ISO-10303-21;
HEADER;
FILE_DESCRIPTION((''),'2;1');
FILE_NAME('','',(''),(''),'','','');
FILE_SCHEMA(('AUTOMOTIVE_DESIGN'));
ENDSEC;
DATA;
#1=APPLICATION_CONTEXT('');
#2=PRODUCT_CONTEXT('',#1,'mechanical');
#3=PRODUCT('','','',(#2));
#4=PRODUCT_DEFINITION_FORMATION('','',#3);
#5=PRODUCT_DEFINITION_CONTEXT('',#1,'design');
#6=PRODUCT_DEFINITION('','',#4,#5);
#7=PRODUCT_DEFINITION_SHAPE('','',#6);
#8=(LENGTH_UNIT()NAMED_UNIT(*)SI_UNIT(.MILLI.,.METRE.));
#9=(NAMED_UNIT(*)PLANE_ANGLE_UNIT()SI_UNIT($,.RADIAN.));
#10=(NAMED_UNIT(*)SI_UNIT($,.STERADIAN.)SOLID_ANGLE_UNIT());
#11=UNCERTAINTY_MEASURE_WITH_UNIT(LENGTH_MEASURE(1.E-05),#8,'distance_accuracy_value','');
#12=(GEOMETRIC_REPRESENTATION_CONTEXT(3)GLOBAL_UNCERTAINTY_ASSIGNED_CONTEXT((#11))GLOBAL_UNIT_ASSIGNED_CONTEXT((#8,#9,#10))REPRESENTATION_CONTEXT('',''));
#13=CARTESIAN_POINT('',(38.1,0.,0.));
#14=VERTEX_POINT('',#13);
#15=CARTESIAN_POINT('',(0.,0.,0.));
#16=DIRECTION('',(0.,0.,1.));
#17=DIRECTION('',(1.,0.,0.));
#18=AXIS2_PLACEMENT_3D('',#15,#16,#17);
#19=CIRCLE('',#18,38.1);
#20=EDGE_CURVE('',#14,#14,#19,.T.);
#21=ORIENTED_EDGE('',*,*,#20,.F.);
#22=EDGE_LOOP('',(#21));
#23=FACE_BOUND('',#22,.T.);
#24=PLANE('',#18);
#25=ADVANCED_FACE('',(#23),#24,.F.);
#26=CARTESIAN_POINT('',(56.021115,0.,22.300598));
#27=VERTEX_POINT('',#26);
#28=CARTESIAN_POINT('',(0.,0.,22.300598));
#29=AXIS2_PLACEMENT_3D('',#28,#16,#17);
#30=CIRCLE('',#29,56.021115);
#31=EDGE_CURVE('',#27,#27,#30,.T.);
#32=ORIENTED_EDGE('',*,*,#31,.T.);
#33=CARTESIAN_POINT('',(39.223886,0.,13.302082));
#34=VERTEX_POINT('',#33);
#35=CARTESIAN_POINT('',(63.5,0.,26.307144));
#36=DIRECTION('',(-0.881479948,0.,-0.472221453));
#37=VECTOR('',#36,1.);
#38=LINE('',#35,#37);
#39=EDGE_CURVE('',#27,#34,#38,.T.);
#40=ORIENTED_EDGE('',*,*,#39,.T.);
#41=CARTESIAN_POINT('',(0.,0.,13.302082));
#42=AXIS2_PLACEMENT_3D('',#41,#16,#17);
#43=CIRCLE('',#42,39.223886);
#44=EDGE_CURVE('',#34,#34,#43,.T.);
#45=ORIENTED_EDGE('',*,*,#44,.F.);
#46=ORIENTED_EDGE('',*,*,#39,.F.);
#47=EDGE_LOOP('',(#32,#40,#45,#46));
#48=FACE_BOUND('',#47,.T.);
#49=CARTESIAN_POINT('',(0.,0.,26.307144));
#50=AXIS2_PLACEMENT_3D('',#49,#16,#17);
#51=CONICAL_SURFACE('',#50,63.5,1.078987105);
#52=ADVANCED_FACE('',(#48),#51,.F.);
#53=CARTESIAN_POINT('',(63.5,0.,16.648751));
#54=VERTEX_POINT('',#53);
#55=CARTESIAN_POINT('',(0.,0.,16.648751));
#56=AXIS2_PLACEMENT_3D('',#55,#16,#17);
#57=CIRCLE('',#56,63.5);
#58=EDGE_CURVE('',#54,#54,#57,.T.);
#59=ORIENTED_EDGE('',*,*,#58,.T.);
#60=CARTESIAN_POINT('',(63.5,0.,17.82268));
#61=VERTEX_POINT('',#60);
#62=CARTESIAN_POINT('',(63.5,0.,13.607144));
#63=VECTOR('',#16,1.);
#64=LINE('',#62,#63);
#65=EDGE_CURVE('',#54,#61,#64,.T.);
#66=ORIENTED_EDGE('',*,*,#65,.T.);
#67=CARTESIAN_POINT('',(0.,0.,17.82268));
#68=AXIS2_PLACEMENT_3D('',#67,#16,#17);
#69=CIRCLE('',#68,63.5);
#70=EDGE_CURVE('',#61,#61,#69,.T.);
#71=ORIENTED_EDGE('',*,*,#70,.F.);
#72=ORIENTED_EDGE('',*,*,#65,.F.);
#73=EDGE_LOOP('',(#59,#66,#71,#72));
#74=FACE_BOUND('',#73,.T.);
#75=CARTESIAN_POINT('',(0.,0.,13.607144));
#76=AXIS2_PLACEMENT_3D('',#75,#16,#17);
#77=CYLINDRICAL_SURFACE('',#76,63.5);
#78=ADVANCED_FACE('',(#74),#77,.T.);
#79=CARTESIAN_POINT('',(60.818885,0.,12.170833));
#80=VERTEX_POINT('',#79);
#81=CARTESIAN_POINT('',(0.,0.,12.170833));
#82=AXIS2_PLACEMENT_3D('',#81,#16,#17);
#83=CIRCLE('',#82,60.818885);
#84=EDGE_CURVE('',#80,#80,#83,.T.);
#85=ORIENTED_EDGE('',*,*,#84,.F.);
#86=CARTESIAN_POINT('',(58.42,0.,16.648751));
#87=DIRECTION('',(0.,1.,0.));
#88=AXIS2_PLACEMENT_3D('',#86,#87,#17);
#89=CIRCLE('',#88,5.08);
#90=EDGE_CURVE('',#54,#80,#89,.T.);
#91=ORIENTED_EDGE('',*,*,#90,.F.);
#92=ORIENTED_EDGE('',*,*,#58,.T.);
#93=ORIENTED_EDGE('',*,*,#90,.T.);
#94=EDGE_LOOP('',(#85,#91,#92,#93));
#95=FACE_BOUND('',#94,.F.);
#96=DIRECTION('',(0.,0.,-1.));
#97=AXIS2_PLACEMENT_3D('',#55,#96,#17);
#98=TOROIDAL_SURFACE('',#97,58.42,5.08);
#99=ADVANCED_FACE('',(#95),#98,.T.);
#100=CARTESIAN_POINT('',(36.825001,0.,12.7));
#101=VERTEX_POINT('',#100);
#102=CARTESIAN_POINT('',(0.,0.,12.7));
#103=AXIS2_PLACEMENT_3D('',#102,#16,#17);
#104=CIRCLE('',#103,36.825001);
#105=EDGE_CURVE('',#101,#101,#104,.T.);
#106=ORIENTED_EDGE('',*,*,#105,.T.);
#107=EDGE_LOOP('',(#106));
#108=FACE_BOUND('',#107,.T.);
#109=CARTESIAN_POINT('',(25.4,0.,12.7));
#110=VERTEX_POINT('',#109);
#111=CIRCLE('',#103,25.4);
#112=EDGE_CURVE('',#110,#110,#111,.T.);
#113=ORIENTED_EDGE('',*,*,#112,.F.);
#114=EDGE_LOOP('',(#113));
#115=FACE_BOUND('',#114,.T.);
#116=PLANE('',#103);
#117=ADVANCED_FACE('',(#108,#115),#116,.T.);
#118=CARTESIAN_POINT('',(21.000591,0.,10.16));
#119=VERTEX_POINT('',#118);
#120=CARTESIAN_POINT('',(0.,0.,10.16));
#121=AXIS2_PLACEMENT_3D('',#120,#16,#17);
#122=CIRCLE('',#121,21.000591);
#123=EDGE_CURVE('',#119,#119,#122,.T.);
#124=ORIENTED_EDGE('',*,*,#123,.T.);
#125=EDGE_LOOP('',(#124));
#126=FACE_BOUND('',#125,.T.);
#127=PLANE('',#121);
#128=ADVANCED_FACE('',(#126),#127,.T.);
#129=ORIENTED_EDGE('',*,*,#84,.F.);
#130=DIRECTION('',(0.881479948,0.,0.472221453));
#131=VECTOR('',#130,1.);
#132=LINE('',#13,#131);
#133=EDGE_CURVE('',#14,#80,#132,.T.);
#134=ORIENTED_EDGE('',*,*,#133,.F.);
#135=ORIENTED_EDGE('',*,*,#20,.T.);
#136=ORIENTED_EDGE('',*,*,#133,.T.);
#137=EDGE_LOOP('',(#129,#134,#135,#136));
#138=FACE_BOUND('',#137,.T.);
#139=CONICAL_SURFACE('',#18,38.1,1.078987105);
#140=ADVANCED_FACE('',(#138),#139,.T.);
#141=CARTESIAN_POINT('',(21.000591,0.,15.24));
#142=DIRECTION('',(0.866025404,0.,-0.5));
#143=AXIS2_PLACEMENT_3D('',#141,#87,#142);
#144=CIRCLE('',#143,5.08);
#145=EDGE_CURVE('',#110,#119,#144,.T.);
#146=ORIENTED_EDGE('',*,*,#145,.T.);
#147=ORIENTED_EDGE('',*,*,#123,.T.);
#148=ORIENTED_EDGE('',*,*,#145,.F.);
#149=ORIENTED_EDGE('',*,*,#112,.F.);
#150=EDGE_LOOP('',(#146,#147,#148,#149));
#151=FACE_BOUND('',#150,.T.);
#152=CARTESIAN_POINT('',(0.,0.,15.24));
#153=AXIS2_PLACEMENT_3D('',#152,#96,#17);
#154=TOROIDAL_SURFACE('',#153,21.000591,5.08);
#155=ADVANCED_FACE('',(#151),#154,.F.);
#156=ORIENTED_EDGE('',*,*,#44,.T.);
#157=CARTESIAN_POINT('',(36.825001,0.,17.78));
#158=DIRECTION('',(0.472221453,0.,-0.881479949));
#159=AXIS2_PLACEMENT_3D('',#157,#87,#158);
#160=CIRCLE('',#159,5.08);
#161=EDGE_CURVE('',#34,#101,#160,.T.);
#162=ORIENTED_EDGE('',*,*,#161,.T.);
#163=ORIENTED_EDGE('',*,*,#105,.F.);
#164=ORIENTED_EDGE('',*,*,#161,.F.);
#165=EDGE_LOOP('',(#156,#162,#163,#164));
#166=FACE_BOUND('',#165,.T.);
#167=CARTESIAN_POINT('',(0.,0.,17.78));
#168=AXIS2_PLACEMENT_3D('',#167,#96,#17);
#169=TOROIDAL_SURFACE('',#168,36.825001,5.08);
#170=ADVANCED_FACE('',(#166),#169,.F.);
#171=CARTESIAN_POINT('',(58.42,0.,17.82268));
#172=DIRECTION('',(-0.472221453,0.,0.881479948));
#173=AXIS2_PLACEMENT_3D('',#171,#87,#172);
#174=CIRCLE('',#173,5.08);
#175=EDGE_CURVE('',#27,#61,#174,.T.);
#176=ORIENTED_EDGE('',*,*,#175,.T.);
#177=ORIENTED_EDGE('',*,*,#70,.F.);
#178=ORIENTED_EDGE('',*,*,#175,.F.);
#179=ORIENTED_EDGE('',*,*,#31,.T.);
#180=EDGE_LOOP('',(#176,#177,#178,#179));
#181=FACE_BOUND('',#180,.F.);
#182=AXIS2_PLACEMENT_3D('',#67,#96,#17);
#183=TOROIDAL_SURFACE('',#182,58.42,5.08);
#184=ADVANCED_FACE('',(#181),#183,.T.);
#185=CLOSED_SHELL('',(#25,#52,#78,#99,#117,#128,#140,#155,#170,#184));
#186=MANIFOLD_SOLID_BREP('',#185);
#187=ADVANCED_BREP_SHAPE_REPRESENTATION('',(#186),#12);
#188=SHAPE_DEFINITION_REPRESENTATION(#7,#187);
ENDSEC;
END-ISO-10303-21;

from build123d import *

# Parameters (mm, degrees)
F3_R     = 25.4
F4_DEPTH = 2.54


# Not quite as in the source:
# - a fillet or chamfer that OpenCascade refuses, or shapes differently, is made with other operations: its cross-section is extruded or revolved along the edge and cut away or added


with BuildPart() as f2:
    # F0 (on Front) → F2 (revolve)
    with BuildSketch(Plane.XZ):
        Polygon((63.5, 13.6071443505), (63.5, 26.3071443505), (38.1, 12.7), (0, 12.7), (0, 0), (38.1, 0), align=None)
    revolve(axis=Axis((0, 0, 37.3074896634), (0, 0, 1)))

    # F3 (on face) → F4 (cut)
    with BuildSketch(Plane.XY.offset(12.7)):
        Circle(F3_R)
    extrude(amount=-F4_DEPTH, mode=Mode.SUBTRACT)

    # F5: fillet of radius 5.08 on 4 edges, made by hand

    # F5_s1 → F5_t2 (revolve)
    with BuildSketch(Plane.XZ):
        with BuildLine():
            ThreePointArc((39.2238860188, 13.3020818618), (38.0616448552, 12.8528190544), (36.8250010386, 12.7))
            Line((36.8250010386, 12.7), (38.1, 12.7))
            Line((38.1, 12.7), (39.2238860188, 13.3020818618))
        make_face()
    revolve(axis=Axis((0, 0, 12.7), (0, 0, 1)))

    # F5_s3 → F5_t4 (revolve)
    with BuildSketch(Plane.XZ):
        with BuildLine():
            ThreePointArc((25.4, 12.7), (23.5405909488, 10.8405909488), (21.0005909488, 10.16))
            Line((21.0005909488, 10.16), (25.4, 10.16))
            Line((25.4, 10.16), (25.4, 12.7))
        make_face()
    revolve(axis=Axis((0, 0, 10.16), (0, 0, 1)))

    # F5_s5 → F5_t6 (revolve, cut)
    with BuildSketch(Plane.XZ):
        with BuildLine():
            ThreePointArc((56.0211150199, 22.3005983857), (61.0296038302, 22.181162535), (63.5, 17.8226802476))
            Line((63.5, 17.8226802476), (63.5, 26.3071443505))
            Line((63.5, 26.3071443505), (56.0211150199, 22.3005983857))
        make_face()
    revolve(axis=Axis((0, 0, 26.3071443505), (0, 0, 1)), mode=Mode.SUBTRACT)

    # F5_s7 → F5_t8 (revolve, cut)
    with BuildSketch(Plane.XZ):
        with BuildLine():
            ThreePointArc((63.5, 16.6487507133), (62.7784822874, 14.0391468831), (60.8188849801, 12.1708325751))
            Line((60.8188849801, 12.1708325751), (63.5, 13.6071443505))
            Line((63.5, 13.6071443505), (63.5, 16.6487507133))
        make_face()
    revolve(axis=Axis((0, 0, 13.6071443505), (0, 0, 1)), mode=Mode.SUBTRACT)


solid = f2.part
